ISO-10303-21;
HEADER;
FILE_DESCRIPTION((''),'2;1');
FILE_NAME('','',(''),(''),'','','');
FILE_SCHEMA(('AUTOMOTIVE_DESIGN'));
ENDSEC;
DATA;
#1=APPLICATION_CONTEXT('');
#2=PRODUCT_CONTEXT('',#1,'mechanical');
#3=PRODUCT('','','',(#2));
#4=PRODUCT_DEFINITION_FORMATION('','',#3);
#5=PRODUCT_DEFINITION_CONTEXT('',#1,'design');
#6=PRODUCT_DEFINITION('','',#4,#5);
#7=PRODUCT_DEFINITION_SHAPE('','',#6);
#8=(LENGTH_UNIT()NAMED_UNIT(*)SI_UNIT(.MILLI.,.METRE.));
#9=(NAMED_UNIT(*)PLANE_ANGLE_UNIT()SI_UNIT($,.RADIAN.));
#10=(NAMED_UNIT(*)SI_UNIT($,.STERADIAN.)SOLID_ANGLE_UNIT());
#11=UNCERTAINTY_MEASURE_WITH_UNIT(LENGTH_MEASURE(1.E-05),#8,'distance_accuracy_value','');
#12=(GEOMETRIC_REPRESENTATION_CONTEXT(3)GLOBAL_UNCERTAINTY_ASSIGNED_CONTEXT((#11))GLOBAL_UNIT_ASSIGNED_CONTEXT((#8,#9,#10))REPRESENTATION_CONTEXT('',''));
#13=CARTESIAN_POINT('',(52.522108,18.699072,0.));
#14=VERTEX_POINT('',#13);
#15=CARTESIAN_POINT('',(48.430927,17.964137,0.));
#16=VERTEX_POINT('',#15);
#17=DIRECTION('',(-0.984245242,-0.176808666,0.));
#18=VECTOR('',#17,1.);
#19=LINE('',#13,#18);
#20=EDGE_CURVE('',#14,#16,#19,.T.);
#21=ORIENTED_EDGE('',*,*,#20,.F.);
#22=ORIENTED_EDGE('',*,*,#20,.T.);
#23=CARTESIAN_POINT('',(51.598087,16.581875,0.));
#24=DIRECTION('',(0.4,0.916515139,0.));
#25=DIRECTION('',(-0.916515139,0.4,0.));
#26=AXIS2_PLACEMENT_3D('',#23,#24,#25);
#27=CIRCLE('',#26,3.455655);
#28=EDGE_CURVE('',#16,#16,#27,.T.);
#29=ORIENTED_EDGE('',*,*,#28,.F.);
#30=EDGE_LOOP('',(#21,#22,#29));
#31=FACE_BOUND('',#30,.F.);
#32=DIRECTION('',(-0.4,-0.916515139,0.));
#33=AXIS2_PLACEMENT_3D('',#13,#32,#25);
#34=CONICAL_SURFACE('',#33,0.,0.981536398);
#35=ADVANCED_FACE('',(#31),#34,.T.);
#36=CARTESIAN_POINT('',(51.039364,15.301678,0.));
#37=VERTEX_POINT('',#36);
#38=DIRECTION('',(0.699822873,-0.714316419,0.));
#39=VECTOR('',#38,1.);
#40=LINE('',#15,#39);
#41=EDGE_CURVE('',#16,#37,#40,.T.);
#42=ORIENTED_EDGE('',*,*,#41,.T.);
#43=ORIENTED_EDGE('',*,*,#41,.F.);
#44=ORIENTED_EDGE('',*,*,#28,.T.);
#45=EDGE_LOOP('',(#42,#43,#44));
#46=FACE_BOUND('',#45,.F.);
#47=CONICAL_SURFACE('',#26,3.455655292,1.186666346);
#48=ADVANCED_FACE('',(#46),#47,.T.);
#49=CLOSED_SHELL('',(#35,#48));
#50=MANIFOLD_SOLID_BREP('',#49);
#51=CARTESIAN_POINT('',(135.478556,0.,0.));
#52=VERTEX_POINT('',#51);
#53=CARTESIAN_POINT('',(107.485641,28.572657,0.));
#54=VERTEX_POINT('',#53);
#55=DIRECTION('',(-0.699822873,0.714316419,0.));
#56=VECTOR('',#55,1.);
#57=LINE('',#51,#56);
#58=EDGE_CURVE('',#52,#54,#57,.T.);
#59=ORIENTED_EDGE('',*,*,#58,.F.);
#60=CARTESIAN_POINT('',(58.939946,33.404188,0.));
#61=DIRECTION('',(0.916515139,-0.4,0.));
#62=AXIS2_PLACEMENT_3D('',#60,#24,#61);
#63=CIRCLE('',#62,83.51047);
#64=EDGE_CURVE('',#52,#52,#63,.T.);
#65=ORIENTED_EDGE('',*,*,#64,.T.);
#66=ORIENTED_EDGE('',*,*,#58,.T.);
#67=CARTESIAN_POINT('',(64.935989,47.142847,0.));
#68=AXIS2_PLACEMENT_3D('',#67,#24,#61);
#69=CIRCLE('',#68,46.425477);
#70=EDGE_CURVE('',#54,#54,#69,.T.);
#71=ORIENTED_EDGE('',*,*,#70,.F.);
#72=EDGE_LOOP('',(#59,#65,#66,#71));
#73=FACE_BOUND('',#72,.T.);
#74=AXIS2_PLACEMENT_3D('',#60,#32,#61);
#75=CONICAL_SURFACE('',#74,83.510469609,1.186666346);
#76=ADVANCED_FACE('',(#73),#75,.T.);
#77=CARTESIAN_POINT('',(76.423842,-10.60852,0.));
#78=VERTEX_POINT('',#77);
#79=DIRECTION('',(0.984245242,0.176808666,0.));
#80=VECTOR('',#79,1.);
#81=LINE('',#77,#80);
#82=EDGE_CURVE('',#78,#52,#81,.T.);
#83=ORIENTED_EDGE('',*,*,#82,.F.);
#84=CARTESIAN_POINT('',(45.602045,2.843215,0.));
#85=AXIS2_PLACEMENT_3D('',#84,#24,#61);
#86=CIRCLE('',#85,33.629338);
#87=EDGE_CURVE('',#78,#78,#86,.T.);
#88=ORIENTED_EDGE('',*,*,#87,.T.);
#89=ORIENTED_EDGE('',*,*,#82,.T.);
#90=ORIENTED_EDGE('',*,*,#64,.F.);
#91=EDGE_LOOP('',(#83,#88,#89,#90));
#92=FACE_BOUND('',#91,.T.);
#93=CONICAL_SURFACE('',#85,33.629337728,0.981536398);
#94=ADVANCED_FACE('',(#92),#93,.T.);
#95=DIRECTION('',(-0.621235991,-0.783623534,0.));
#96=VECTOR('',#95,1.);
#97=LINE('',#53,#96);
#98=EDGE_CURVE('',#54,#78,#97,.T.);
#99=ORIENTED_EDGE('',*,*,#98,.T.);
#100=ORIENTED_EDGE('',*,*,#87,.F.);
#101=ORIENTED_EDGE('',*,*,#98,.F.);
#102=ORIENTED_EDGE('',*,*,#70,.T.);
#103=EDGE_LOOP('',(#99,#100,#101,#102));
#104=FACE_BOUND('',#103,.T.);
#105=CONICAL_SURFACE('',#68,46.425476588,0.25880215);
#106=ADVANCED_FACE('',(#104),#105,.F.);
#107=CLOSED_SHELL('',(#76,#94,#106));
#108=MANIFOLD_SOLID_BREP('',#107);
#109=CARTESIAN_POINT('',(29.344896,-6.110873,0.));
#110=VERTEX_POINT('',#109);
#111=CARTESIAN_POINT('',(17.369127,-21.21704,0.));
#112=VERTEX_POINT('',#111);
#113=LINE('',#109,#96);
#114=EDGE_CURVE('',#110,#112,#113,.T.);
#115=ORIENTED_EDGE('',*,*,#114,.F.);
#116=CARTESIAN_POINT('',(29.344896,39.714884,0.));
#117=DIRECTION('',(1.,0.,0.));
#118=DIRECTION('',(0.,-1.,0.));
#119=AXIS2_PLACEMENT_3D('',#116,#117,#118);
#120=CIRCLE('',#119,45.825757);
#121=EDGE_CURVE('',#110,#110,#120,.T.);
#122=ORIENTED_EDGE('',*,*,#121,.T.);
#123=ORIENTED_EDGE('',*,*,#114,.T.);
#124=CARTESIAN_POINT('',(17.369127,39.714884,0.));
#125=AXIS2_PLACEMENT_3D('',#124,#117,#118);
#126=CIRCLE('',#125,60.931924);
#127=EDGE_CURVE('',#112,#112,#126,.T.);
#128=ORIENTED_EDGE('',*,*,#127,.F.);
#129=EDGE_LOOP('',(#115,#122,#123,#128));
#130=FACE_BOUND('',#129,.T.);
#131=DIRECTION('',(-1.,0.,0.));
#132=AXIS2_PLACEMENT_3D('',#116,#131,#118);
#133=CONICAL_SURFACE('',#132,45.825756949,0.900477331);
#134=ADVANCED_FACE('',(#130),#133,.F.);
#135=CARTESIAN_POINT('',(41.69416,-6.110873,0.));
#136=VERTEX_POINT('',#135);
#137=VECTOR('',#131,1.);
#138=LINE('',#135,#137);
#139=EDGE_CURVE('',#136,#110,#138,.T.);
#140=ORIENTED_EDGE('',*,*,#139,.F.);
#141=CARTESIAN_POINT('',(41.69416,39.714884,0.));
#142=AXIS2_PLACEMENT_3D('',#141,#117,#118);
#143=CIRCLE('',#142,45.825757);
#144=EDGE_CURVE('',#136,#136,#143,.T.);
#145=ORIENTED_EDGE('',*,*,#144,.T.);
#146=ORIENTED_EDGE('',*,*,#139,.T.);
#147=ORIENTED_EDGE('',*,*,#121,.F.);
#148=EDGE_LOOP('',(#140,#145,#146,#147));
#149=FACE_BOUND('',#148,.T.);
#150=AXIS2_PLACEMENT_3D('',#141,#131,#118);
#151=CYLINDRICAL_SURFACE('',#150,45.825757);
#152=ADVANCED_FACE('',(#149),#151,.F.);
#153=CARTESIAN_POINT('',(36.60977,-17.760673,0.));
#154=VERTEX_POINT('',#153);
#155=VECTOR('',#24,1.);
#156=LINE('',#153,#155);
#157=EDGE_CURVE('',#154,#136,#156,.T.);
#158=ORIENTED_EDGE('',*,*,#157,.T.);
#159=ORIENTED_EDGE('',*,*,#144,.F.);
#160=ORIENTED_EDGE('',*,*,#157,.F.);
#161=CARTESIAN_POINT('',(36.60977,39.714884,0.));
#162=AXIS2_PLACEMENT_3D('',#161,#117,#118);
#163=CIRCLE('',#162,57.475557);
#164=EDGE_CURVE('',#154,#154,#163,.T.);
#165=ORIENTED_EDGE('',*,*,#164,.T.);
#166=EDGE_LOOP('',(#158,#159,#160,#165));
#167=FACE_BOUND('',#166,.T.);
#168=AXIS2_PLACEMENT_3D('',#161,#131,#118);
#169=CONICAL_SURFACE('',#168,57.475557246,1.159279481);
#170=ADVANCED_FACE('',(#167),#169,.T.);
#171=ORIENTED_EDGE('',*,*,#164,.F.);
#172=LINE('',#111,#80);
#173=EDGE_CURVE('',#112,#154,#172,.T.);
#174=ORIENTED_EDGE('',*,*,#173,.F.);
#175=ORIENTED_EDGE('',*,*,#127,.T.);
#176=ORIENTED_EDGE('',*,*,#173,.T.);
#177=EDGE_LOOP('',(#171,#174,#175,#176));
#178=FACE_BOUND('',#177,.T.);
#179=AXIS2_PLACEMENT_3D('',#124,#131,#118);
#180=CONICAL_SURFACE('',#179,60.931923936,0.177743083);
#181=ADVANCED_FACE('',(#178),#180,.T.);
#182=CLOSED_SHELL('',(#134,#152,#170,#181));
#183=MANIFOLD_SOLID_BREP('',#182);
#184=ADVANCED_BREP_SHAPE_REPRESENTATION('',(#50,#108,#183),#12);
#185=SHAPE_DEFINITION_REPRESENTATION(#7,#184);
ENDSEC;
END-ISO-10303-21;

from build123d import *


# Not quite as in the source:
# - a feature of the source that left no trace in its solid (it failed there, or was rolled back) is left out


with BuildPart() as f2:
    # F0 (on Top) → F2 (revolve)
    with BuildSketch(Plane.XY):
        Polygon((41.6941601038, -6.1108729366), (29.3448964108, -6.1108729366), (17.3691271637, -21.2170399226), (36.609770419, -17.7606732331), align=None)
    revolve(axis=Axis((21.6941601038, 39.7148840129, 0), (1, 0, 0)))


with BuildPart() as f3:
    # F0 (on Top) → F3 (revolve)
    with BuildSketch(Plane.XY):
        Polygon((52.5221076777, 18.6990717526), (48.4309267247, 17.964136783), (51.0393636355, 15.3016783478), align=None)
    revolve(axis=Axis((41.6941601038, -6.1108729366, 0), (0.4, 0.916515139, 0)))


with BuildPart() as f3b:
    # F0 (on Top) → F3, piece 2 (revolve)
    with BuildSketch(Plane.XY):
        Polygon((107.4856412209, 28.5726567443), (76.4238416599, -10.6085199613), (135.4785561562, 0), align=None)
    revolve(axis=Axis((41.6941601038, -6.1108729366, 0), (0.4, 0.916515139, 0)))


solid = Compound([f2.part, f3.part, f3b.part])
